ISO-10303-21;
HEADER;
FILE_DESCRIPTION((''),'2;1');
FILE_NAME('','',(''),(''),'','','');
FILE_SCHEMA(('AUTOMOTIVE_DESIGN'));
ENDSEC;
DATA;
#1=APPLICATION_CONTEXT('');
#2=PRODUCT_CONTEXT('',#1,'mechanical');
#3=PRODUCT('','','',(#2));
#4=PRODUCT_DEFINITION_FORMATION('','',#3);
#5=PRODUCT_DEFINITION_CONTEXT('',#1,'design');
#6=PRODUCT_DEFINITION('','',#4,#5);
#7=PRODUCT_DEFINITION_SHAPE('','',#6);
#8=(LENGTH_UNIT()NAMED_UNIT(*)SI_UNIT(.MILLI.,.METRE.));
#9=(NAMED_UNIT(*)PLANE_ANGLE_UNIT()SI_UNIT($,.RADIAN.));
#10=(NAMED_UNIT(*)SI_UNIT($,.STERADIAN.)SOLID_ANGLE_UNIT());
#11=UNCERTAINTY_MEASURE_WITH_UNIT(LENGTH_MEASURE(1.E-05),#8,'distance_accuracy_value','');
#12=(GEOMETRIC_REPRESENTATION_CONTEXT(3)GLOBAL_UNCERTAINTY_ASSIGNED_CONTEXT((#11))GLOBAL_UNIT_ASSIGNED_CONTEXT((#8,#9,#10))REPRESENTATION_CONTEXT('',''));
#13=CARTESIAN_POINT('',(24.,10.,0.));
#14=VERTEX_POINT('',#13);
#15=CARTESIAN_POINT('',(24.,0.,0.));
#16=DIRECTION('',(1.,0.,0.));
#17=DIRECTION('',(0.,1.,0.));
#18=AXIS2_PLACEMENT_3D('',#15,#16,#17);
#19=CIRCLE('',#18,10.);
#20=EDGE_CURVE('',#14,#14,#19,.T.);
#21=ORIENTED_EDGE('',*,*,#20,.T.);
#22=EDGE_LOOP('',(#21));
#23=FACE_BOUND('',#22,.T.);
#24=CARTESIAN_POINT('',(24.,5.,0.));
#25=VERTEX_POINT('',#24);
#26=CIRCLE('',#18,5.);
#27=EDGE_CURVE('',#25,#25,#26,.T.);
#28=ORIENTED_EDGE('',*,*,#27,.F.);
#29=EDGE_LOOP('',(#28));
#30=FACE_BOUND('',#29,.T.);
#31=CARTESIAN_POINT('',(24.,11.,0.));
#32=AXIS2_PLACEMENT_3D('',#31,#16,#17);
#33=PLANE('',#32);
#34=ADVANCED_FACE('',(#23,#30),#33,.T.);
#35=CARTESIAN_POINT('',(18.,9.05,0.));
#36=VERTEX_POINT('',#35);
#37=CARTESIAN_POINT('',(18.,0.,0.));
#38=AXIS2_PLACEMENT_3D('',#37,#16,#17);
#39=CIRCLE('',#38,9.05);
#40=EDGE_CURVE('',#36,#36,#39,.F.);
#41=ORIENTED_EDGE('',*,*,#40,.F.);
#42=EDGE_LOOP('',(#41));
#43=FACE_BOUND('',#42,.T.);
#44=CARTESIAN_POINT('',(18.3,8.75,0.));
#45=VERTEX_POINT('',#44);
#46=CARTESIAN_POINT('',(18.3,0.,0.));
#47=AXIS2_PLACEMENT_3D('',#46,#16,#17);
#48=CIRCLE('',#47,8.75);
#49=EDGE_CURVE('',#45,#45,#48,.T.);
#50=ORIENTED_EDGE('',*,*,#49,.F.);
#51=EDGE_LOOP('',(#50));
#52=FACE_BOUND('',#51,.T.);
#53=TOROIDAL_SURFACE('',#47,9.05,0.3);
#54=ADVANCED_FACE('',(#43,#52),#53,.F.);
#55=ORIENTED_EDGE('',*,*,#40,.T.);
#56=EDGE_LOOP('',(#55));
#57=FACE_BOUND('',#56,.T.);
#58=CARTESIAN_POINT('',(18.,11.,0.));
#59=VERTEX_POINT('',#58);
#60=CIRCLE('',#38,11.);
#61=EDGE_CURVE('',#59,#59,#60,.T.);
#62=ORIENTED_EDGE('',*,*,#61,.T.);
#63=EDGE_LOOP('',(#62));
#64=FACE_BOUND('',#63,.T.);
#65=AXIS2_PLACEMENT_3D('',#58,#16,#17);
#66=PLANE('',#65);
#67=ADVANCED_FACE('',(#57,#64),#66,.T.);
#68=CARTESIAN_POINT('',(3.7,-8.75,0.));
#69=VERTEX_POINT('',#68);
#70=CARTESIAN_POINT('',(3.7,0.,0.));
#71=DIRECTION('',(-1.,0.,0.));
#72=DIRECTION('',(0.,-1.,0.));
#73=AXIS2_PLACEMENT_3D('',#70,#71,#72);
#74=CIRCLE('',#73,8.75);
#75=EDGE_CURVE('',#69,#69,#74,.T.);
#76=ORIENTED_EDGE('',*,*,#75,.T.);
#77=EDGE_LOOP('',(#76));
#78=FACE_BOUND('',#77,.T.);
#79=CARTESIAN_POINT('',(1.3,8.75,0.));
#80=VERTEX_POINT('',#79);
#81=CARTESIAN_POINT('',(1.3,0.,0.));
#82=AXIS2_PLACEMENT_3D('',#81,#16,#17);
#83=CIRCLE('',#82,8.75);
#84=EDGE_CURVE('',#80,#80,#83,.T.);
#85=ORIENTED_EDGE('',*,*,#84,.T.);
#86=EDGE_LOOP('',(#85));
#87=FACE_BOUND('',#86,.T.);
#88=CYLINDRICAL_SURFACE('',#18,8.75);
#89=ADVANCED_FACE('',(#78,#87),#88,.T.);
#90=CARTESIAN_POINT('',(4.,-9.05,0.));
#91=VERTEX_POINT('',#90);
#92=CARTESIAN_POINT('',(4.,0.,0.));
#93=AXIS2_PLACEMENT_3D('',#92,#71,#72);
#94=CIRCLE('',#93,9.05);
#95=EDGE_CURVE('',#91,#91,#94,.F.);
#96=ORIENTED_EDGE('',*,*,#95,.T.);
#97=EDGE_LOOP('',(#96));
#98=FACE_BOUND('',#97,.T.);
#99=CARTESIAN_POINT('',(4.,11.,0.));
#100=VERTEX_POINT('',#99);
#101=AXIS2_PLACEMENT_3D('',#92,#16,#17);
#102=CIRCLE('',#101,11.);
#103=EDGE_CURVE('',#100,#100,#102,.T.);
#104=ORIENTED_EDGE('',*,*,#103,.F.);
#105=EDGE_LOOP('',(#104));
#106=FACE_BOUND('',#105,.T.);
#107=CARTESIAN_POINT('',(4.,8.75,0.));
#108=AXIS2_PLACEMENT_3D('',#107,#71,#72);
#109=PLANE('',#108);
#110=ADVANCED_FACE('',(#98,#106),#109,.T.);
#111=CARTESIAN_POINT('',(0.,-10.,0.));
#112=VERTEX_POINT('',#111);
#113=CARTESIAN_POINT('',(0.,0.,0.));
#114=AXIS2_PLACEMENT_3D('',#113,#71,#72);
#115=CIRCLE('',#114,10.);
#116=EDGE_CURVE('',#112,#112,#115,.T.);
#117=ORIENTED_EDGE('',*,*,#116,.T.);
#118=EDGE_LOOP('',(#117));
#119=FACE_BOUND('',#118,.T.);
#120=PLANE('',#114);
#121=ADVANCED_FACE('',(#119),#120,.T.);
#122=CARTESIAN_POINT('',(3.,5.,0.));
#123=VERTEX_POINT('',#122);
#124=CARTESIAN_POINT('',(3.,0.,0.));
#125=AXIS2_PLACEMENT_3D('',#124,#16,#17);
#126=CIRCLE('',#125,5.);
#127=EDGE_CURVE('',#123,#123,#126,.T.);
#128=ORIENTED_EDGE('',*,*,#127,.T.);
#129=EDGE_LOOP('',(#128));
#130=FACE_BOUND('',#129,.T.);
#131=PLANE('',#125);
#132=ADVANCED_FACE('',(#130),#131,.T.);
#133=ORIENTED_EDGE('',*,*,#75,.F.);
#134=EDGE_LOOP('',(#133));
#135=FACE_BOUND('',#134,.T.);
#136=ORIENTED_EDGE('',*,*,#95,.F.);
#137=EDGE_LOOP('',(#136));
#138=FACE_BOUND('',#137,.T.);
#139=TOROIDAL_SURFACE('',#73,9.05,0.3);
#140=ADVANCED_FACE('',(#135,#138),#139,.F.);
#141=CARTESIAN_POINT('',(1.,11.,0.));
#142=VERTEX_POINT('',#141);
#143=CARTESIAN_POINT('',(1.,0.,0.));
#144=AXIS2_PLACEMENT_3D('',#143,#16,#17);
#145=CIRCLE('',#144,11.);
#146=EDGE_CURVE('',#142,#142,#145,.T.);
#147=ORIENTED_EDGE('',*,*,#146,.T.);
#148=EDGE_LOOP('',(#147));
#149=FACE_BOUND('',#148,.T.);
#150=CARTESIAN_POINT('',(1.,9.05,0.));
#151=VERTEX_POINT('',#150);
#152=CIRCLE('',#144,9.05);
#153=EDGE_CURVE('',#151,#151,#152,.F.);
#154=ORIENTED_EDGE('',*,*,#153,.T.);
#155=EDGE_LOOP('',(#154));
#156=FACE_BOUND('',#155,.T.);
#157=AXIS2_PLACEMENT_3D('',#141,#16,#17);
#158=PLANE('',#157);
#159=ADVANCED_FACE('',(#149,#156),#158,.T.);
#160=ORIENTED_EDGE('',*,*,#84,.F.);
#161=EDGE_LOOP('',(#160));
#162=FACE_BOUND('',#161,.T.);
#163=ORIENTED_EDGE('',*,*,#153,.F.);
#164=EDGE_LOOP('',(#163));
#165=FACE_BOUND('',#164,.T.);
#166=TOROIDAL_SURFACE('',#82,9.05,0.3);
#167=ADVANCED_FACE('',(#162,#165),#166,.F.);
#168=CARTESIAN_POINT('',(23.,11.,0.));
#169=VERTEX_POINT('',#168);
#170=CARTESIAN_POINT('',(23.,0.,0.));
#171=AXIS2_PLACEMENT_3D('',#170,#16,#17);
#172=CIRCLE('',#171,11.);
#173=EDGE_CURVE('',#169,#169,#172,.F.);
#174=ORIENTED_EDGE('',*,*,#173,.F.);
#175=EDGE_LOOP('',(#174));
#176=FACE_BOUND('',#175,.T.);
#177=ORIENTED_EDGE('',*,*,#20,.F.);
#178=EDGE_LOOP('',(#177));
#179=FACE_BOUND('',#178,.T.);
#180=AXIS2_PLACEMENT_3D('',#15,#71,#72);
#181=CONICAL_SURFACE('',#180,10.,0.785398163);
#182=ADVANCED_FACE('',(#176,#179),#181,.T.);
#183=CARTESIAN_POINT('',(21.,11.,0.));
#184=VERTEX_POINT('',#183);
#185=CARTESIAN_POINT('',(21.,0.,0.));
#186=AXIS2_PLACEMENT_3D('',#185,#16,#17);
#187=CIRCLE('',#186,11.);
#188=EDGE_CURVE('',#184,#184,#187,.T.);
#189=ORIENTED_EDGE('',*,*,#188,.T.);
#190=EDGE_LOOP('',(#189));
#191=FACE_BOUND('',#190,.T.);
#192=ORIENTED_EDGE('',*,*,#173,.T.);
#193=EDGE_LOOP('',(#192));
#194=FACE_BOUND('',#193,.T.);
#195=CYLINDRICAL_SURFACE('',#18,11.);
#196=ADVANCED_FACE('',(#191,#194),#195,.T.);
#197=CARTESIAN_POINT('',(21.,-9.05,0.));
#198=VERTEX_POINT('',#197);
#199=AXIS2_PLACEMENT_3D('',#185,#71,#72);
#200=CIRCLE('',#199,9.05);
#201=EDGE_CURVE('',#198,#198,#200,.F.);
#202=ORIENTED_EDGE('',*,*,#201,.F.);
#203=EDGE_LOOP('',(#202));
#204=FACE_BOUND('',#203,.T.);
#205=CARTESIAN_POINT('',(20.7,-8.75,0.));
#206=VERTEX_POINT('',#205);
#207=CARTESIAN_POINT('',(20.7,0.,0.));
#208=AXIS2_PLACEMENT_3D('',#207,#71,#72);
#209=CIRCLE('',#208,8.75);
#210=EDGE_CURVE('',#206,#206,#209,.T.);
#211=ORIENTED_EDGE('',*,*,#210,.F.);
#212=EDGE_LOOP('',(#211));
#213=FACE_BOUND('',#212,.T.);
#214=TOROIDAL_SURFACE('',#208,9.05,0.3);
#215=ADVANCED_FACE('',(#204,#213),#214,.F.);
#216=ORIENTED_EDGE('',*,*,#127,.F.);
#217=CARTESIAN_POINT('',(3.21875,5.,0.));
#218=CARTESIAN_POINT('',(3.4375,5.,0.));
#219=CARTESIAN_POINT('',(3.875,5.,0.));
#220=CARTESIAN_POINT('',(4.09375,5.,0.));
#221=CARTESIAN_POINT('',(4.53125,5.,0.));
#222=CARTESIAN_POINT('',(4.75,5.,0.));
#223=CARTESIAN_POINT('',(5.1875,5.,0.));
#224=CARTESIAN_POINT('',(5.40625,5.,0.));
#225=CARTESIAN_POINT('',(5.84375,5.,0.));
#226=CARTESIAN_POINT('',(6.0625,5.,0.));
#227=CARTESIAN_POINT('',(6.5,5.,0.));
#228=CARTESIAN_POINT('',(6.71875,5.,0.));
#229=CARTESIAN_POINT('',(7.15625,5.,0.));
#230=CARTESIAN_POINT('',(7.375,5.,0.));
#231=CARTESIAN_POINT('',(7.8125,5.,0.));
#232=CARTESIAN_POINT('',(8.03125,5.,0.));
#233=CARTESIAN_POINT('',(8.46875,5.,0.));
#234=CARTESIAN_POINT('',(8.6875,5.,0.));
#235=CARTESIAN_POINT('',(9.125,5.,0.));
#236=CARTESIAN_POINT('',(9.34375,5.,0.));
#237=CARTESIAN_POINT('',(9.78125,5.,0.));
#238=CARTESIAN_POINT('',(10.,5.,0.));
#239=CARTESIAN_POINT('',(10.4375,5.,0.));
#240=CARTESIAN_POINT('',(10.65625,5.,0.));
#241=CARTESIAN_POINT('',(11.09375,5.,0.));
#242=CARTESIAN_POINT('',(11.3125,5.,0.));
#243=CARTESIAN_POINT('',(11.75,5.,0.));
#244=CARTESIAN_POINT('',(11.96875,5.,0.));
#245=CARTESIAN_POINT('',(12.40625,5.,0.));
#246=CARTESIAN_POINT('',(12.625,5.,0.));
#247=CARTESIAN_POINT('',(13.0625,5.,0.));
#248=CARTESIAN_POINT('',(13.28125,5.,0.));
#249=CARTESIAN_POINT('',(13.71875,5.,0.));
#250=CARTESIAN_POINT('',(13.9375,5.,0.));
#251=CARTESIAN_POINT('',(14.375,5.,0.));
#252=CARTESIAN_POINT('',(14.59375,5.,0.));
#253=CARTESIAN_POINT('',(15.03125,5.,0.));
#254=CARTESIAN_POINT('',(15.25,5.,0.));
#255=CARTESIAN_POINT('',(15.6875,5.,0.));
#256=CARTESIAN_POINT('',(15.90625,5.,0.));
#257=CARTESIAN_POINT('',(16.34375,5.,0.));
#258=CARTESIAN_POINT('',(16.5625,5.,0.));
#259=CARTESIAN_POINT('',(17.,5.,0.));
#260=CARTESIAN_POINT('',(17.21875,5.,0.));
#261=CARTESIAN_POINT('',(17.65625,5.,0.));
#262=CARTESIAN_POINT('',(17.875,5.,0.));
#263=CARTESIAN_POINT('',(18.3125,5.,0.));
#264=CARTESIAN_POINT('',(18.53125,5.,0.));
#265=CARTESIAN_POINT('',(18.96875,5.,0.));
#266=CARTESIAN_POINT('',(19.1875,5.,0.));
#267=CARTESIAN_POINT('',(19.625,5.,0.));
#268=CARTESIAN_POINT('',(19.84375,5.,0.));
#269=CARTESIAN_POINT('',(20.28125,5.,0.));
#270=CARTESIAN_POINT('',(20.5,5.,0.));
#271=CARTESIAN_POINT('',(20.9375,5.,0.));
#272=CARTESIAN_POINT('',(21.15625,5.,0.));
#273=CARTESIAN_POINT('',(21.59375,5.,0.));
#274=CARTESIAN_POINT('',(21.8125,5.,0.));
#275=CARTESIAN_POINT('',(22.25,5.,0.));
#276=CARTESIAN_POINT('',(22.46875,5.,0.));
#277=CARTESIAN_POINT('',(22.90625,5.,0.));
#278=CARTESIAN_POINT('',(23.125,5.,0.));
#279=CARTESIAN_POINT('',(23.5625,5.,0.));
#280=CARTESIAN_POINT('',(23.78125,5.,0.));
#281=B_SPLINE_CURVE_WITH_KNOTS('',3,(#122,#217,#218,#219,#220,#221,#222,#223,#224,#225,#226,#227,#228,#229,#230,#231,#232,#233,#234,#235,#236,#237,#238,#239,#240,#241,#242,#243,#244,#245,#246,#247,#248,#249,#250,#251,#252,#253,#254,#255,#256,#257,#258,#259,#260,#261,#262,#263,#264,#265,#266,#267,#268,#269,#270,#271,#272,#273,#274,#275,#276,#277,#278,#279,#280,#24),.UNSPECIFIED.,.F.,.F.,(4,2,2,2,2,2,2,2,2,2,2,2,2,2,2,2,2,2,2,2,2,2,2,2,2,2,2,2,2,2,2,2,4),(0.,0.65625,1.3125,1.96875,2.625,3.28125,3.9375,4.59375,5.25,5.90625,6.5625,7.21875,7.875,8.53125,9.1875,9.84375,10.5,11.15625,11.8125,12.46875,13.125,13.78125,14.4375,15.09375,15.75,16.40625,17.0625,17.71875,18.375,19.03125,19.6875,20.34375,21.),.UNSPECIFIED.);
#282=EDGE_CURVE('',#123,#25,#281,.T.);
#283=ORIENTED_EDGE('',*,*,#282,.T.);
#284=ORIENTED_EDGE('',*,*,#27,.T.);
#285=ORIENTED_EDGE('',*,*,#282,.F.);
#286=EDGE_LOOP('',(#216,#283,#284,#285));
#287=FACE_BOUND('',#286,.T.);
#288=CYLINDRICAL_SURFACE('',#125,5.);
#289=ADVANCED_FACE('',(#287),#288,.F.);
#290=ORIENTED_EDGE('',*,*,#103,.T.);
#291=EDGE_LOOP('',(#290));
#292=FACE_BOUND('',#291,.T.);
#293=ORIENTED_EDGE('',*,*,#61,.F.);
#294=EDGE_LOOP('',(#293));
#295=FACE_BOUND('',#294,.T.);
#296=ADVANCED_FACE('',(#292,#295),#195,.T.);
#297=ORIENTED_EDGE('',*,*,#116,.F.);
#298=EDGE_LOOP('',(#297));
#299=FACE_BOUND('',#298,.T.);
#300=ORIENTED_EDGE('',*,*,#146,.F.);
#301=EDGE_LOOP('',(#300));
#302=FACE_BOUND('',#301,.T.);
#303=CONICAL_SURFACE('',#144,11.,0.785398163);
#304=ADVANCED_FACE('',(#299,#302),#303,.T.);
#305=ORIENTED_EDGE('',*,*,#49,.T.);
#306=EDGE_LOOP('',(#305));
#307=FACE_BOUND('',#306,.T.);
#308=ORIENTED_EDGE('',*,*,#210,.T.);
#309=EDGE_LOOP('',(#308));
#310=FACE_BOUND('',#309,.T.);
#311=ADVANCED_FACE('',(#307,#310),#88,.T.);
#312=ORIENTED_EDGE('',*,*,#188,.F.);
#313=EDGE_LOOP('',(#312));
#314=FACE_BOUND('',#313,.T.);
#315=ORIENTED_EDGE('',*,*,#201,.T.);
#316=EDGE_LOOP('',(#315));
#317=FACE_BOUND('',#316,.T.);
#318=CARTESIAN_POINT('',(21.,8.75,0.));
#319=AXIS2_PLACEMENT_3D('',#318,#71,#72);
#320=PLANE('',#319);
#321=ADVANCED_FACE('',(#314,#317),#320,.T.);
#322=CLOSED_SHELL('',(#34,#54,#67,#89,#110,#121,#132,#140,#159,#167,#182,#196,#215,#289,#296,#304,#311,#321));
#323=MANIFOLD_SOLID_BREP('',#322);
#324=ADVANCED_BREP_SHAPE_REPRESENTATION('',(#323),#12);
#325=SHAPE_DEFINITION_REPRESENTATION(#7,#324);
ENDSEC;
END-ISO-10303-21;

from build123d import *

# Parameters (mm, degrees)
SCHIZZO2_R               = 5
TAGLIO_ESTRUSIONE1_DEPTH = 21
SMUSSO1_SIZE             = 1
RACCORDO1_R              = 0.3


with BuildPart() as part:
    # Schizzo1 → Rivoluzione1 (revolve)
    with BuildSketch(Plane.XY):
        Polygon((0, 0), (0, 11), (1, 11), (1, 8.75), (4, 8.75), (4, 11), (18, 11), (18, 8.75), (21, 8.75), (21, 11), (24, 11), (24, 0), align=None)
    revolve(axis=Axis((24, 0, 0), (-1, 0, 0)))

    # Schizzo2 → Taglio-Estrusione1 (cut)
    with BuildSketch(Plane(origin=(24, 0, 0), x_dir=(0, 0, -1), z_dir=(1, 0, 0))):
        with Locations(Location((0, 0, 0), (0, 0, 90))):
            Circle(SCHIZZO2_R)
    extrude(amount=-TAGLIO_ESTRUSIONE1_DEPTH, mode=Mode.SUBTRACT)

    # Smusso1
    smusso1_edges = [part.edges().sort_by_distance(p)[0] for p in [
        (0, -11, 0),
        (24, -11, 0),
    ]]
    chamfer(smusso1_edges, length=SMUSSO1_SIZE - 0.0001)  # a hair under: the kernel refuses the full size

    # Raccordo1
    raccordo1_edges = [part.edges().sort_by_distance(p)[0] for p in [
        (21, -8.75, 0),
        (18, -8.75, 0),
        (4, -8.75, 0),
        (1, -8.75, 0),
    ]]
    fillet(raccordo1_edges, radius=RACCORDO1_R)


solid = part.part
